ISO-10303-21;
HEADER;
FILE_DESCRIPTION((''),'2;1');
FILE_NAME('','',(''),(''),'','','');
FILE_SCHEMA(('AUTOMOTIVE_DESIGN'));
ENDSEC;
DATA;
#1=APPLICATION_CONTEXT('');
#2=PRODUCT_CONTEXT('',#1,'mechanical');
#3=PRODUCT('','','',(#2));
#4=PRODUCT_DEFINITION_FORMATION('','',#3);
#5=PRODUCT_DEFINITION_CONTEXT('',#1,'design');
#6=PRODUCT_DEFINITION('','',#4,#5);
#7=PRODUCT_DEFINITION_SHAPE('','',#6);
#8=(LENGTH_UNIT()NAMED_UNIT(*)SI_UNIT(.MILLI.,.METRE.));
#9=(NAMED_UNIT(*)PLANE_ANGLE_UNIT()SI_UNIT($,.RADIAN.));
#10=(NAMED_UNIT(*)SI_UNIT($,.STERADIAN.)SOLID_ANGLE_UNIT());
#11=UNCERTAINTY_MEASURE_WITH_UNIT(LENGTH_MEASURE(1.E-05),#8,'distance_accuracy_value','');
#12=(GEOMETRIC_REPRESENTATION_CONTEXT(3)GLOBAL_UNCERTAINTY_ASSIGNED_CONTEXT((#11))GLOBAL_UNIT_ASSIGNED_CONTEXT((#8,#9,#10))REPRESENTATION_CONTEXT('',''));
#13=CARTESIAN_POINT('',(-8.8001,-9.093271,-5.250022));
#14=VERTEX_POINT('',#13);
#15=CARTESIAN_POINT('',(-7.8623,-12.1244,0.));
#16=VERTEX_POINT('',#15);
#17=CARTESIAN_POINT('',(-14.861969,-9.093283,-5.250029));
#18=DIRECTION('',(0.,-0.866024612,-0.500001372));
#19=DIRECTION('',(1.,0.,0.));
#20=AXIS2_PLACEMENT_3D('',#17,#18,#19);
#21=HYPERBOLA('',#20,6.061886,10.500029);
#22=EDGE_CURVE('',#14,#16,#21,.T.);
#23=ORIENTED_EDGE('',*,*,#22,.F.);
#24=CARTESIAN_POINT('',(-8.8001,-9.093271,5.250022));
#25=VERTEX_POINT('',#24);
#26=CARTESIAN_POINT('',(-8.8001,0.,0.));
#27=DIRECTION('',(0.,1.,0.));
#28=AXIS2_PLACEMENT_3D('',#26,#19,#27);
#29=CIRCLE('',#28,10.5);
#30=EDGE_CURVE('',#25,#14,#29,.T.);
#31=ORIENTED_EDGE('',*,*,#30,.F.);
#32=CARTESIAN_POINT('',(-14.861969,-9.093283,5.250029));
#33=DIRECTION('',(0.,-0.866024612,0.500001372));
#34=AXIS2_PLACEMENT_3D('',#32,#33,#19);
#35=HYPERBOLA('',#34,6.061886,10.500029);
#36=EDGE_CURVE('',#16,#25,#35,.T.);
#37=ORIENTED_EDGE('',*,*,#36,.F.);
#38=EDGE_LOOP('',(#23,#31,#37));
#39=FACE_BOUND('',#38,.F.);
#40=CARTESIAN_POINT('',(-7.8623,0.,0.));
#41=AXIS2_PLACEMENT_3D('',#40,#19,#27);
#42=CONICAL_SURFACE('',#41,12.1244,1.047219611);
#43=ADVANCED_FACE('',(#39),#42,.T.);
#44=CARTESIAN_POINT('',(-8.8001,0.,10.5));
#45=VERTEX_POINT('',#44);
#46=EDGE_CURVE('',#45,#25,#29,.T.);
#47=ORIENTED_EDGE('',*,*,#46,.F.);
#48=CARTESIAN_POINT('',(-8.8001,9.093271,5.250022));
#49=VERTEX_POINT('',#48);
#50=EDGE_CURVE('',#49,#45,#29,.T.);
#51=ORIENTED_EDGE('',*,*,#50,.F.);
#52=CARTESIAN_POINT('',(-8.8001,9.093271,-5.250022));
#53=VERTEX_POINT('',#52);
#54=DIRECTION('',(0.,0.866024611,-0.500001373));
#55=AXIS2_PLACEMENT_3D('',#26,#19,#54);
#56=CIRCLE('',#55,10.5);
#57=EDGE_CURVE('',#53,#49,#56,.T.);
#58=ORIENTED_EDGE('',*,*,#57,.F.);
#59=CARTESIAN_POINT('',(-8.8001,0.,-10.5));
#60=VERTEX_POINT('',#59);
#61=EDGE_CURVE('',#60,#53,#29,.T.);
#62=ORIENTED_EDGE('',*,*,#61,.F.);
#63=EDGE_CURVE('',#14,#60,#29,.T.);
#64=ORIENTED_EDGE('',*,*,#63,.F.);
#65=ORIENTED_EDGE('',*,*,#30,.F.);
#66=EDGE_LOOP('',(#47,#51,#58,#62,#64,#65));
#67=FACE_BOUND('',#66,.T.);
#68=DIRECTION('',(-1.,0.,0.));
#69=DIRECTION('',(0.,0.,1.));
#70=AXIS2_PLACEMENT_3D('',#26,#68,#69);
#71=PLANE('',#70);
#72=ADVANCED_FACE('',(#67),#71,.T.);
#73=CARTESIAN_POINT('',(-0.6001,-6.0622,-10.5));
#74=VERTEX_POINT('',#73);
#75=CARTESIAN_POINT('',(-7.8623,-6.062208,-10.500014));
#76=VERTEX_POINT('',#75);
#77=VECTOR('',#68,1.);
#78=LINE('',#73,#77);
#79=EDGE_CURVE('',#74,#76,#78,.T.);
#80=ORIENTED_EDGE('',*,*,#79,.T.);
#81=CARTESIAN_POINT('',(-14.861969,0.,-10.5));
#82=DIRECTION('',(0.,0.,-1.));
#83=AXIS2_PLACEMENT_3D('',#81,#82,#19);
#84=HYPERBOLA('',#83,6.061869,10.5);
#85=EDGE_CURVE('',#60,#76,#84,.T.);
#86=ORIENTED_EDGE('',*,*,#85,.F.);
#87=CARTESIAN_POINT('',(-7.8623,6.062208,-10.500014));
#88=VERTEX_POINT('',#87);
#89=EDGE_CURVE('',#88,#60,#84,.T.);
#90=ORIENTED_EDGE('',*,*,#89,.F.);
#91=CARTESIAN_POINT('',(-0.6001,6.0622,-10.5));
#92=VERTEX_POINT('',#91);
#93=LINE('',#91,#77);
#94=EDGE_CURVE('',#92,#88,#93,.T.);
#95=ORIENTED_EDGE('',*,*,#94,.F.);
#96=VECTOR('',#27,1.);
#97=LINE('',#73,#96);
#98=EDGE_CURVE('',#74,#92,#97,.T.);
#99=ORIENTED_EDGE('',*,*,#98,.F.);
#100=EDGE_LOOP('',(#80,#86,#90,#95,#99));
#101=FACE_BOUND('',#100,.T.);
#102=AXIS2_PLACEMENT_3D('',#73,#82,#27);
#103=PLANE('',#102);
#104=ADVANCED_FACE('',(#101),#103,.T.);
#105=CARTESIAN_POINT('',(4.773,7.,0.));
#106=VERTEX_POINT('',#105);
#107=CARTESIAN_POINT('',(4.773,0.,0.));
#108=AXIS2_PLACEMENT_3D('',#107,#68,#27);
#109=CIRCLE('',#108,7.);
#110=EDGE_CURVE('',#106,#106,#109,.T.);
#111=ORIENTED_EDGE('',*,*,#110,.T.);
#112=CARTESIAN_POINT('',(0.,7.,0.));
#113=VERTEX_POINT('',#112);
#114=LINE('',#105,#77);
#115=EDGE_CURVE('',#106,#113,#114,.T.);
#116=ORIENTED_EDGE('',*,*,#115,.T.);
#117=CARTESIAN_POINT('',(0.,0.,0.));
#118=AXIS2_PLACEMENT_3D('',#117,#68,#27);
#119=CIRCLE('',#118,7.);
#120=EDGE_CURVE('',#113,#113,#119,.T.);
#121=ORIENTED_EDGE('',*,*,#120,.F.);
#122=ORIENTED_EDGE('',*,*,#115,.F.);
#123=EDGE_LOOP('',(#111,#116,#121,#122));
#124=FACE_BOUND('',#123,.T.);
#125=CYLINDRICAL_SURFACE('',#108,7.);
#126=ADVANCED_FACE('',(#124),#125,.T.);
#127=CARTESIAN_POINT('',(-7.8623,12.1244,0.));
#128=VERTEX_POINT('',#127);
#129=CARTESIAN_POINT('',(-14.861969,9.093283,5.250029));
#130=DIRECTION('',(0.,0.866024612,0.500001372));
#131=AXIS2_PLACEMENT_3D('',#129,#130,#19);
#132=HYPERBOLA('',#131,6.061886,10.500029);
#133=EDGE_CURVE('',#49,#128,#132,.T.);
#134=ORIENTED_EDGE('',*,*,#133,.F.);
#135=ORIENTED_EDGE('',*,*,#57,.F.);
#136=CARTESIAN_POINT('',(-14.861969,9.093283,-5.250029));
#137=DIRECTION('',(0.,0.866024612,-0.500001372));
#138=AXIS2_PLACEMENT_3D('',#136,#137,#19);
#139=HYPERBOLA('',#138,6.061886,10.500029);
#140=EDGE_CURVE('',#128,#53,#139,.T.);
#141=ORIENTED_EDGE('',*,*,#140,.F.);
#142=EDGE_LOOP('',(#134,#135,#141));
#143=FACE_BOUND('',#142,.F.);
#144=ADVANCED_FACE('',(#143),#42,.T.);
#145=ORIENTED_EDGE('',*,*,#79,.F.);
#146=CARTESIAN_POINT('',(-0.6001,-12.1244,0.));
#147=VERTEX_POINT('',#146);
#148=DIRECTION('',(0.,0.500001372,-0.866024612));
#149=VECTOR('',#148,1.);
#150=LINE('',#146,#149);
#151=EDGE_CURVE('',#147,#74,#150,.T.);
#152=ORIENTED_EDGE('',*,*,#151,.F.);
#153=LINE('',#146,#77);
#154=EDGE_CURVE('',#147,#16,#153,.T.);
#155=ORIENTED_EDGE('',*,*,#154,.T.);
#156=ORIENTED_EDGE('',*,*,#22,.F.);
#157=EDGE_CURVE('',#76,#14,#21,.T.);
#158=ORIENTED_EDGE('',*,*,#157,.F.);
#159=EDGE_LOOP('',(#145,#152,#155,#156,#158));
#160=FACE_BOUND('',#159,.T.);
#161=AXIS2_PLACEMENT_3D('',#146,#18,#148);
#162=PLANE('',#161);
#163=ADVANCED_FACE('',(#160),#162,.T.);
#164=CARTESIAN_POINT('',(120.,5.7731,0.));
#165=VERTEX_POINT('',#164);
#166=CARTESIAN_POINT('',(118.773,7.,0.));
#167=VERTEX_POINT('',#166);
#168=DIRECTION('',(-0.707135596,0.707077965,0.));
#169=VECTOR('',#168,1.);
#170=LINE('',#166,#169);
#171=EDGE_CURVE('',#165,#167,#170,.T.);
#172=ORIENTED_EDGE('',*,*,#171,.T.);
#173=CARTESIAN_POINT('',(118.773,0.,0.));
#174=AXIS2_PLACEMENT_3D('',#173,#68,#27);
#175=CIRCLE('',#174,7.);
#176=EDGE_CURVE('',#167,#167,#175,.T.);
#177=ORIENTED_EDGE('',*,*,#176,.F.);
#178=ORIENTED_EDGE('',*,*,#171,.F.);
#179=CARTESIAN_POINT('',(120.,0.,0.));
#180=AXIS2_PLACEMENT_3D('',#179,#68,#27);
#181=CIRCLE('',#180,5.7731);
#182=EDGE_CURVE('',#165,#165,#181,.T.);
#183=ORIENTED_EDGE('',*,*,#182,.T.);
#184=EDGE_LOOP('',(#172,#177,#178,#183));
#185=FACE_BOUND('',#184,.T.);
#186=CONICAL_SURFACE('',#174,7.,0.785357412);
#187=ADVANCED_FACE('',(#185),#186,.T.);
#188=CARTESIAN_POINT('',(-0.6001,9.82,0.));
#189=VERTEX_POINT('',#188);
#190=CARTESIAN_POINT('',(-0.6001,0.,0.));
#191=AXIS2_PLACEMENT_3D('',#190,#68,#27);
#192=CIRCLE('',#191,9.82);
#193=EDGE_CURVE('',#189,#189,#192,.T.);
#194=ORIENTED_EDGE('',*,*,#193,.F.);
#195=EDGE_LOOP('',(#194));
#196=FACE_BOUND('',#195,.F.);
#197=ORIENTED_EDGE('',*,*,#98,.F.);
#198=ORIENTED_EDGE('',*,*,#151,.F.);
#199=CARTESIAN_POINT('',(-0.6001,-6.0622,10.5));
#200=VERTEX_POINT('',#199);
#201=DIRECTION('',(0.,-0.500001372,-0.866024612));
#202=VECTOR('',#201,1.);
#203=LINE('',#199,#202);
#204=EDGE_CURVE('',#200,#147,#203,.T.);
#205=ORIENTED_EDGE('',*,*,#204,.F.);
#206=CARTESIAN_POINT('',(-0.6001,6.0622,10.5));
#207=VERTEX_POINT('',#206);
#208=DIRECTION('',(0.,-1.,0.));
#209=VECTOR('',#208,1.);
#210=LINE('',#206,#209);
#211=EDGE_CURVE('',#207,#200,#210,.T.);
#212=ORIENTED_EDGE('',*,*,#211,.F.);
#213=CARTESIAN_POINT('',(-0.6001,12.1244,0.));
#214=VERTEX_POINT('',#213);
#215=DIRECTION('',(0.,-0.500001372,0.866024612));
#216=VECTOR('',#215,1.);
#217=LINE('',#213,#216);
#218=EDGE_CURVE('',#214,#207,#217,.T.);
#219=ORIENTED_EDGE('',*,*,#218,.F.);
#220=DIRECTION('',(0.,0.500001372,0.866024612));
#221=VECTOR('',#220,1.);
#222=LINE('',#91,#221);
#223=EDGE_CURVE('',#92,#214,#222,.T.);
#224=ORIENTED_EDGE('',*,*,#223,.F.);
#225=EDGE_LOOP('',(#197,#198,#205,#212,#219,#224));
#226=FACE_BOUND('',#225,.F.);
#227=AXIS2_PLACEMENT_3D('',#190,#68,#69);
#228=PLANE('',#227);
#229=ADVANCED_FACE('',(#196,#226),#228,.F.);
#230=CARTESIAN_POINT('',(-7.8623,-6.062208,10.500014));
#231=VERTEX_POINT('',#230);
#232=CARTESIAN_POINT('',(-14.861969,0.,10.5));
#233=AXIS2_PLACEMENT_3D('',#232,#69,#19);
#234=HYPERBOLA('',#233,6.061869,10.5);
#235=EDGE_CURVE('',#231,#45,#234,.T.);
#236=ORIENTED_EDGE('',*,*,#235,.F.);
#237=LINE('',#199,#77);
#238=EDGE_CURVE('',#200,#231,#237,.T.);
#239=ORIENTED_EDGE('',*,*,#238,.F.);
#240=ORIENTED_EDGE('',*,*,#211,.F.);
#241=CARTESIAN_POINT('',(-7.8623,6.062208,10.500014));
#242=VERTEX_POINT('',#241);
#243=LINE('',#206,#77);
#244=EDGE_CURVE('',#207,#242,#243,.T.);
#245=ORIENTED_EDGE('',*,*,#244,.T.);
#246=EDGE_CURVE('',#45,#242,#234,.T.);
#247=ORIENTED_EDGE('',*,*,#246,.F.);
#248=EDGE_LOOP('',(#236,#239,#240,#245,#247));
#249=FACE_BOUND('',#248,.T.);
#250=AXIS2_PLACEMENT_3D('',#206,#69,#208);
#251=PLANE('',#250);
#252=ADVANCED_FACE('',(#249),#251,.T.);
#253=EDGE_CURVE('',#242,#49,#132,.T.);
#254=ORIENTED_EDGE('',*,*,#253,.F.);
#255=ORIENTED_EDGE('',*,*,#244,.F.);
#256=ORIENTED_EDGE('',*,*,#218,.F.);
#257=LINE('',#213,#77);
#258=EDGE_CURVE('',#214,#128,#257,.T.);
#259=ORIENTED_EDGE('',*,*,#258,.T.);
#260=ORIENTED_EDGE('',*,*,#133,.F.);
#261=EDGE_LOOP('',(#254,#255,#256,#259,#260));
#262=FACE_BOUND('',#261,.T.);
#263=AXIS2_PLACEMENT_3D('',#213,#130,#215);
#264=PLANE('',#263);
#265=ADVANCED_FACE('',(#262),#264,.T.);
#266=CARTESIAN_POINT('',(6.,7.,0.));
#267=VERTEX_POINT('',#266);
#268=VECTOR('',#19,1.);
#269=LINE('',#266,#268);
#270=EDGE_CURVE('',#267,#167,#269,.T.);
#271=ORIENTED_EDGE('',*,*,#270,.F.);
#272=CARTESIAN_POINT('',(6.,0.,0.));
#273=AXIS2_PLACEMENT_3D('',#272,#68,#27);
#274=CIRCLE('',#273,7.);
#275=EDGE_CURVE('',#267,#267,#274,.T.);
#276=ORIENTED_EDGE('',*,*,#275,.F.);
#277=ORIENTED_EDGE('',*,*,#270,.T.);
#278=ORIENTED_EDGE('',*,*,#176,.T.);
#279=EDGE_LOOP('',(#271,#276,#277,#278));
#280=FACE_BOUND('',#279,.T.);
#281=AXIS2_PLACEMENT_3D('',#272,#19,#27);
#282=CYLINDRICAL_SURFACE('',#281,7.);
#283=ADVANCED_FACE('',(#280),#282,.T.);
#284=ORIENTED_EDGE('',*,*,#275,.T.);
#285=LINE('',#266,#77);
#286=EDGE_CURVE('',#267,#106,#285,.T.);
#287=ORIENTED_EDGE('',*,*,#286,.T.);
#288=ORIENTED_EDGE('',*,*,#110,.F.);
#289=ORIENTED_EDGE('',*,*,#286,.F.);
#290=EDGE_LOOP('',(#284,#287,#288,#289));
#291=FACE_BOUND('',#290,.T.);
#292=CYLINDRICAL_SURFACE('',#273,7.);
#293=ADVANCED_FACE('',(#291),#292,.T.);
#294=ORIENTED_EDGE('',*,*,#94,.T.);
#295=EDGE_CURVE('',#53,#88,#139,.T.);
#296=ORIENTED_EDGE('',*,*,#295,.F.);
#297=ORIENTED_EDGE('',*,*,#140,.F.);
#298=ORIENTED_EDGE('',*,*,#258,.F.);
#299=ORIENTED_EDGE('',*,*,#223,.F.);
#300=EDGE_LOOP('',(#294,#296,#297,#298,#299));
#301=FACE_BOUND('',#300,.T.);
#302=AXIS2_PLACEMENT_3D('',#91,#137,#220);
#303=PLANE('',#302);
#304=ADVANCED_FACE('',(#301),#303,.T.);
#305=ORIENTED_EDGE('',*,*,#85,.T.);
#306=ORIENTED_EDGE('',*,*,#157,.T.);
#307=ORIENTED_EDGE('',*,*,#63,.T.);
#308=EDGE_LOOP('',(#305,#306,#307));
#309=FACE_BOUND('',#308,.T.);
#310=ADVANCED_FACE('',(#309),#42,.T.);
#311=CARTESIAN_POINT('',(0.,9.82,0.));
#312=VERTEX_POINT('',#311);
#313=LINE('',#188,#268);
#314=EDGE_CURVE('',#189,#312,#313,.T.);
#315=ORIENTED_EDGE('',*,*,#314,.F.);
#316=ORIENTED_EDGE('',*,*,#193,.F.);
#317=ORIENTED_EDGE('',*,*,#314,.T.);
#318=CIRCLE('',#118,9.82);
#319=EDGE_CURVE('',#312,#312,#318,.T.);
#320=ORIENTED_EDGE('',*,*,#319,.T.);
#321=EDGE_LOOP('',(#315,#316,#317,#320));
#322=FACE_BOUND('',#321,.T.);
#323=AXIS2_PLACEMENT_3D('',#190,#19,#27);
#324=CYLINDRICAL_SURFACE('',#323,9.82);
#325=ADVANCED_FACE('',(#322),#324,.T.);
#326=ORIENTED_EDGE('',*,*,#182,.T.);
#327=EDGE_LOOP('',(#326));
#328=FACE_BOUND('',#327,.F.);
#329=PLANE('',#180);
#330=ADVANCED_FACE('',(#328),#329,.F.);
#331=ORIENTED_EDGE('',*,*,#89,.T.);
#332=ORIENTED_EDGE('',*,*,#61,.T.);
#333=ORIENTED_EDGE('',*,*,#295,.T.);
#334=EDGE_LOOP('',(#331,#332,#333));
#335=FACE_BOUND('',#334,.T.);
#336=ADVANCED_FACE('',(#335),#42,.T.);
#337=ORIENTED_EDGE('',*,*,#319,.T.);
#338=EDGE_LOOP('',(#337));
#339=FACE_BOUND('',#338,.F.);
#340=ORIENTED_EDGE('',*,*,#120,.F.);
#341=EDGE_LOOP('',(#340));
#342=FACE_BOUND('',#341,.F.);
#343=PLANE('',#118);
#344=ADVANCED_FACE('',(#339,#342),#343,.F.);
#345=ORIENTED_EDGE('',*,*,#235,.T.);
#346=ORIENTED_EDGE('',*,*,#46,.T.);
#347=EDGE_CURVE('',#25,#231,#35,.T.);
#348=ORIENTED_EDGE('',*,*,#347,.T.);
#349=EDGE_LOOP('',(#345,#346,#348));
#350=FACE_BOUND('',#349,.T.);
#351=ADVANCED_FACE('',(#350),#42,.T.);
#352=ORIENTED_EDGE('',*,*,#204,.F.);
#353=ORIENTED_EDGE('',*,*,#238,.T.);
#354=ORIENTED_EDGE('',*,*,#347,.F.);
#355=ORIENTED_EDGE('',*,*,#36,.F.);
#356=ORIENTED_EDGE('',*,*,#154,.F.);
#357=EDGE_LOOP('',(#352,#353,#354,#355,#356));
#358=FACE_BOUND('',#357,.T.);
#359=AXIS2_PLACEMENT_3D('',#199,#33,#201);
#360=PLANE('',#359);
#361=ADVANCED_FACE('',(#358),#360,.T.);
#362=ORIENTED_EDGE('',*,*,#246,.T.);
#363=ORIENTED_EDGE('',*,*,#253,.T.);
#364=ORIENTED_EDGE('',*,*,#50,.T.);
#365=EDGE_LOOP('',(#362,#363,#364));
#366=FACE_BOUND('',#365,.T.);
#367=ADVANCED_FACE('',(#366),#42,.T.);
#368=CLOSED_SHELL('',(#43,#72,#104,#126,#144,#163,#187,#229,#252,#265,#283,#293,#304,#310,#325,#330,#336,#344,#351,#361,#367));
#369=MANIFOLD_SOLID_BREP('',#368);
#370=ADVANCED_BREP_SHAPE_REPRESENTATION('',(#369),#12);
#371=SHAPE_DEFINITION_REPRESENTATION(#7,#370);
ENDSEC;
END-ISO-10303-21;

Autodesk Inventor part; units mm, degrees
ref_plane "YZ Plane" through (0, 0, 0) normal (1, 0, 0) x (0, 1, 0)
ref_plane "XZ Plane" through (0, 0, 0) normal (0, 1, 0) x (-1, 0, 0)
sketch "Sketch1" plane through (0, 0, 0) normal (0, 0, 1) x (1, 0, 0)
  line L0 (0, 9.82) -> (0, 7)
  line L1 (6, 7) -> (120, 7)
  line L2 (120, 7) -> (120, 0)
  line L3 (120, 0) -> (-0.6001, 0)
  line L4 (-24.7201, 0) -> (144.12, 0) projected
  line L5 (-0.6001, 0) -> (-0.6001, 9.82)
  line L6 (-0.6001, 9.82) -> (0, 9.82)
  line L7 (6, 7) -> (4.773, 7)
  line L8 (4.773, 7) -> (0, 7)
  line L9 (0, -1.964) -> (0, 11.784) projected
  dimension "d0" = 120
  dimension "d1" = 114
  dimension "d2" = 14
  dimension "d9" = 0.6001
  dimension "d10" = 19.64
  dimension "d13" = 1.227
  dimension "d14" = 14
revolve "Body" add sketch "Sketch1" angle 360 about axis through (120, 0, 0) along (-1, 0, 0)
sketch "Sketch2" plane through (-0.6001, 0, 0) normal (-1, 0, 0) x (0, 0, 1)
  line L0 (0, 12.1244) -> (10.5, 6.0622)
  line L1 (10.5, 6.0622) -> (10.5, -6.0622)
  line L2 (10.5, -6.0622) -> (0, -12.1244)
  line L3 (0, -12.1244) -> (-10.5, -6.0622)
  line L4 (-10.5, -6.0622) -> (-10.5, 6.0622)
  line L5 (-10.5, 6.0622) -> (0, 12.1244)
  point P0 (0, 0)
  point P1 (0, 0)
  dimension "d11" = 21
extrude "Head" add sketch "Sketch2" along normal blind 8.2
sketch "Sketch4" plane through (0, 0, 0) normal (0, 0, 1) x (1, 0, 0)
  line L0 (-8.8001, 10.5) -> (-8.8001, 12.1244)
  line L1 (-8.8001, 12.1244) -> (-7.8623, 12.1244)
  line L2 (-7.8623, 12.1244) -> (-8.8001, 10.5)
  line L3 (-10.4401, 0) -> (1.0399, 0) projected
  line L4 (-0.6001, 12.1244) -> (-8.8001, 12.1244) projected
  line L5 (-8.8001, 6.0622) -> (-8.8001, 12.1244) projected
  dimension "d5" = 30
  dimension "d19" = 21
revolve "Chamfer1" cut sketch "Sketch4" angle 360 about axis through (-10, 0, 0) along (1, 0, 0)
thread "Thread" size "M14x2" class "6g" standard "ISO Metric profile" length 114
chamfer "Chamfer2" distance 1.2269 distance2 1.227 1 edges at (120, -7, 0) measured on face at (120, 1.5471, 1.0213)
ref_plane "Work Plane1" through (1.525, 0, 0) normal (0, 0, 1) x (1, 0, 0)
equation "\"d0\" = NLG"
equation "\"d1\" = GEL"
equation "\"d2\" = GD"
equation "\"d10\" = SD2"
equation "\"d14\" = BDM"
equation "\"d11\" = SW"
equation "\"d3\" = KOH - SD"
equation "\"d5\" = ANG1"
equation "\"d19\" = SW0"
equation "\"d15\" = GEL"
equation "\"d6\" = -0.5 * SPD + 0.5 * GD"
equation "\"NLG\" = 120"
equation "\"GD\" = NND"
equation "\"BDM\" = NND"
equation "\"KOH\" = 8.8"
equation "\"GEL\" = 114"
equation "\"SW\" = 21"
equation "\"SW0\" = SW"
equation "\"SPD\" = NND - 1.2269 * PTC"
equation "\"SD2\" = 19.64"
equation "\"SD\" = 0.6"
equation "\"ANG1\" = 30deg"
equation "\"GAL\" = 0.61345 * PTC"
equation "\"GUL\" = 0.61345 * PTC"
equation "\"RR\" = 0.6"
equation "\"GD1\" = THREADDIA - 1.2269 * PTC"
equation "\"THREADDIA\" = 14"
equation "\"SDH\" = SD2"
equation "\"SDHG\" = 6"
equation "\"TOA\" = 30deg"
equation "\"PTC\" = 2"
equation "\"NND\" = 14"
equation "\"E0\" = 24.255"
properties part number "ISO 4017 - M14 x 120" material "Steel, Mild"
